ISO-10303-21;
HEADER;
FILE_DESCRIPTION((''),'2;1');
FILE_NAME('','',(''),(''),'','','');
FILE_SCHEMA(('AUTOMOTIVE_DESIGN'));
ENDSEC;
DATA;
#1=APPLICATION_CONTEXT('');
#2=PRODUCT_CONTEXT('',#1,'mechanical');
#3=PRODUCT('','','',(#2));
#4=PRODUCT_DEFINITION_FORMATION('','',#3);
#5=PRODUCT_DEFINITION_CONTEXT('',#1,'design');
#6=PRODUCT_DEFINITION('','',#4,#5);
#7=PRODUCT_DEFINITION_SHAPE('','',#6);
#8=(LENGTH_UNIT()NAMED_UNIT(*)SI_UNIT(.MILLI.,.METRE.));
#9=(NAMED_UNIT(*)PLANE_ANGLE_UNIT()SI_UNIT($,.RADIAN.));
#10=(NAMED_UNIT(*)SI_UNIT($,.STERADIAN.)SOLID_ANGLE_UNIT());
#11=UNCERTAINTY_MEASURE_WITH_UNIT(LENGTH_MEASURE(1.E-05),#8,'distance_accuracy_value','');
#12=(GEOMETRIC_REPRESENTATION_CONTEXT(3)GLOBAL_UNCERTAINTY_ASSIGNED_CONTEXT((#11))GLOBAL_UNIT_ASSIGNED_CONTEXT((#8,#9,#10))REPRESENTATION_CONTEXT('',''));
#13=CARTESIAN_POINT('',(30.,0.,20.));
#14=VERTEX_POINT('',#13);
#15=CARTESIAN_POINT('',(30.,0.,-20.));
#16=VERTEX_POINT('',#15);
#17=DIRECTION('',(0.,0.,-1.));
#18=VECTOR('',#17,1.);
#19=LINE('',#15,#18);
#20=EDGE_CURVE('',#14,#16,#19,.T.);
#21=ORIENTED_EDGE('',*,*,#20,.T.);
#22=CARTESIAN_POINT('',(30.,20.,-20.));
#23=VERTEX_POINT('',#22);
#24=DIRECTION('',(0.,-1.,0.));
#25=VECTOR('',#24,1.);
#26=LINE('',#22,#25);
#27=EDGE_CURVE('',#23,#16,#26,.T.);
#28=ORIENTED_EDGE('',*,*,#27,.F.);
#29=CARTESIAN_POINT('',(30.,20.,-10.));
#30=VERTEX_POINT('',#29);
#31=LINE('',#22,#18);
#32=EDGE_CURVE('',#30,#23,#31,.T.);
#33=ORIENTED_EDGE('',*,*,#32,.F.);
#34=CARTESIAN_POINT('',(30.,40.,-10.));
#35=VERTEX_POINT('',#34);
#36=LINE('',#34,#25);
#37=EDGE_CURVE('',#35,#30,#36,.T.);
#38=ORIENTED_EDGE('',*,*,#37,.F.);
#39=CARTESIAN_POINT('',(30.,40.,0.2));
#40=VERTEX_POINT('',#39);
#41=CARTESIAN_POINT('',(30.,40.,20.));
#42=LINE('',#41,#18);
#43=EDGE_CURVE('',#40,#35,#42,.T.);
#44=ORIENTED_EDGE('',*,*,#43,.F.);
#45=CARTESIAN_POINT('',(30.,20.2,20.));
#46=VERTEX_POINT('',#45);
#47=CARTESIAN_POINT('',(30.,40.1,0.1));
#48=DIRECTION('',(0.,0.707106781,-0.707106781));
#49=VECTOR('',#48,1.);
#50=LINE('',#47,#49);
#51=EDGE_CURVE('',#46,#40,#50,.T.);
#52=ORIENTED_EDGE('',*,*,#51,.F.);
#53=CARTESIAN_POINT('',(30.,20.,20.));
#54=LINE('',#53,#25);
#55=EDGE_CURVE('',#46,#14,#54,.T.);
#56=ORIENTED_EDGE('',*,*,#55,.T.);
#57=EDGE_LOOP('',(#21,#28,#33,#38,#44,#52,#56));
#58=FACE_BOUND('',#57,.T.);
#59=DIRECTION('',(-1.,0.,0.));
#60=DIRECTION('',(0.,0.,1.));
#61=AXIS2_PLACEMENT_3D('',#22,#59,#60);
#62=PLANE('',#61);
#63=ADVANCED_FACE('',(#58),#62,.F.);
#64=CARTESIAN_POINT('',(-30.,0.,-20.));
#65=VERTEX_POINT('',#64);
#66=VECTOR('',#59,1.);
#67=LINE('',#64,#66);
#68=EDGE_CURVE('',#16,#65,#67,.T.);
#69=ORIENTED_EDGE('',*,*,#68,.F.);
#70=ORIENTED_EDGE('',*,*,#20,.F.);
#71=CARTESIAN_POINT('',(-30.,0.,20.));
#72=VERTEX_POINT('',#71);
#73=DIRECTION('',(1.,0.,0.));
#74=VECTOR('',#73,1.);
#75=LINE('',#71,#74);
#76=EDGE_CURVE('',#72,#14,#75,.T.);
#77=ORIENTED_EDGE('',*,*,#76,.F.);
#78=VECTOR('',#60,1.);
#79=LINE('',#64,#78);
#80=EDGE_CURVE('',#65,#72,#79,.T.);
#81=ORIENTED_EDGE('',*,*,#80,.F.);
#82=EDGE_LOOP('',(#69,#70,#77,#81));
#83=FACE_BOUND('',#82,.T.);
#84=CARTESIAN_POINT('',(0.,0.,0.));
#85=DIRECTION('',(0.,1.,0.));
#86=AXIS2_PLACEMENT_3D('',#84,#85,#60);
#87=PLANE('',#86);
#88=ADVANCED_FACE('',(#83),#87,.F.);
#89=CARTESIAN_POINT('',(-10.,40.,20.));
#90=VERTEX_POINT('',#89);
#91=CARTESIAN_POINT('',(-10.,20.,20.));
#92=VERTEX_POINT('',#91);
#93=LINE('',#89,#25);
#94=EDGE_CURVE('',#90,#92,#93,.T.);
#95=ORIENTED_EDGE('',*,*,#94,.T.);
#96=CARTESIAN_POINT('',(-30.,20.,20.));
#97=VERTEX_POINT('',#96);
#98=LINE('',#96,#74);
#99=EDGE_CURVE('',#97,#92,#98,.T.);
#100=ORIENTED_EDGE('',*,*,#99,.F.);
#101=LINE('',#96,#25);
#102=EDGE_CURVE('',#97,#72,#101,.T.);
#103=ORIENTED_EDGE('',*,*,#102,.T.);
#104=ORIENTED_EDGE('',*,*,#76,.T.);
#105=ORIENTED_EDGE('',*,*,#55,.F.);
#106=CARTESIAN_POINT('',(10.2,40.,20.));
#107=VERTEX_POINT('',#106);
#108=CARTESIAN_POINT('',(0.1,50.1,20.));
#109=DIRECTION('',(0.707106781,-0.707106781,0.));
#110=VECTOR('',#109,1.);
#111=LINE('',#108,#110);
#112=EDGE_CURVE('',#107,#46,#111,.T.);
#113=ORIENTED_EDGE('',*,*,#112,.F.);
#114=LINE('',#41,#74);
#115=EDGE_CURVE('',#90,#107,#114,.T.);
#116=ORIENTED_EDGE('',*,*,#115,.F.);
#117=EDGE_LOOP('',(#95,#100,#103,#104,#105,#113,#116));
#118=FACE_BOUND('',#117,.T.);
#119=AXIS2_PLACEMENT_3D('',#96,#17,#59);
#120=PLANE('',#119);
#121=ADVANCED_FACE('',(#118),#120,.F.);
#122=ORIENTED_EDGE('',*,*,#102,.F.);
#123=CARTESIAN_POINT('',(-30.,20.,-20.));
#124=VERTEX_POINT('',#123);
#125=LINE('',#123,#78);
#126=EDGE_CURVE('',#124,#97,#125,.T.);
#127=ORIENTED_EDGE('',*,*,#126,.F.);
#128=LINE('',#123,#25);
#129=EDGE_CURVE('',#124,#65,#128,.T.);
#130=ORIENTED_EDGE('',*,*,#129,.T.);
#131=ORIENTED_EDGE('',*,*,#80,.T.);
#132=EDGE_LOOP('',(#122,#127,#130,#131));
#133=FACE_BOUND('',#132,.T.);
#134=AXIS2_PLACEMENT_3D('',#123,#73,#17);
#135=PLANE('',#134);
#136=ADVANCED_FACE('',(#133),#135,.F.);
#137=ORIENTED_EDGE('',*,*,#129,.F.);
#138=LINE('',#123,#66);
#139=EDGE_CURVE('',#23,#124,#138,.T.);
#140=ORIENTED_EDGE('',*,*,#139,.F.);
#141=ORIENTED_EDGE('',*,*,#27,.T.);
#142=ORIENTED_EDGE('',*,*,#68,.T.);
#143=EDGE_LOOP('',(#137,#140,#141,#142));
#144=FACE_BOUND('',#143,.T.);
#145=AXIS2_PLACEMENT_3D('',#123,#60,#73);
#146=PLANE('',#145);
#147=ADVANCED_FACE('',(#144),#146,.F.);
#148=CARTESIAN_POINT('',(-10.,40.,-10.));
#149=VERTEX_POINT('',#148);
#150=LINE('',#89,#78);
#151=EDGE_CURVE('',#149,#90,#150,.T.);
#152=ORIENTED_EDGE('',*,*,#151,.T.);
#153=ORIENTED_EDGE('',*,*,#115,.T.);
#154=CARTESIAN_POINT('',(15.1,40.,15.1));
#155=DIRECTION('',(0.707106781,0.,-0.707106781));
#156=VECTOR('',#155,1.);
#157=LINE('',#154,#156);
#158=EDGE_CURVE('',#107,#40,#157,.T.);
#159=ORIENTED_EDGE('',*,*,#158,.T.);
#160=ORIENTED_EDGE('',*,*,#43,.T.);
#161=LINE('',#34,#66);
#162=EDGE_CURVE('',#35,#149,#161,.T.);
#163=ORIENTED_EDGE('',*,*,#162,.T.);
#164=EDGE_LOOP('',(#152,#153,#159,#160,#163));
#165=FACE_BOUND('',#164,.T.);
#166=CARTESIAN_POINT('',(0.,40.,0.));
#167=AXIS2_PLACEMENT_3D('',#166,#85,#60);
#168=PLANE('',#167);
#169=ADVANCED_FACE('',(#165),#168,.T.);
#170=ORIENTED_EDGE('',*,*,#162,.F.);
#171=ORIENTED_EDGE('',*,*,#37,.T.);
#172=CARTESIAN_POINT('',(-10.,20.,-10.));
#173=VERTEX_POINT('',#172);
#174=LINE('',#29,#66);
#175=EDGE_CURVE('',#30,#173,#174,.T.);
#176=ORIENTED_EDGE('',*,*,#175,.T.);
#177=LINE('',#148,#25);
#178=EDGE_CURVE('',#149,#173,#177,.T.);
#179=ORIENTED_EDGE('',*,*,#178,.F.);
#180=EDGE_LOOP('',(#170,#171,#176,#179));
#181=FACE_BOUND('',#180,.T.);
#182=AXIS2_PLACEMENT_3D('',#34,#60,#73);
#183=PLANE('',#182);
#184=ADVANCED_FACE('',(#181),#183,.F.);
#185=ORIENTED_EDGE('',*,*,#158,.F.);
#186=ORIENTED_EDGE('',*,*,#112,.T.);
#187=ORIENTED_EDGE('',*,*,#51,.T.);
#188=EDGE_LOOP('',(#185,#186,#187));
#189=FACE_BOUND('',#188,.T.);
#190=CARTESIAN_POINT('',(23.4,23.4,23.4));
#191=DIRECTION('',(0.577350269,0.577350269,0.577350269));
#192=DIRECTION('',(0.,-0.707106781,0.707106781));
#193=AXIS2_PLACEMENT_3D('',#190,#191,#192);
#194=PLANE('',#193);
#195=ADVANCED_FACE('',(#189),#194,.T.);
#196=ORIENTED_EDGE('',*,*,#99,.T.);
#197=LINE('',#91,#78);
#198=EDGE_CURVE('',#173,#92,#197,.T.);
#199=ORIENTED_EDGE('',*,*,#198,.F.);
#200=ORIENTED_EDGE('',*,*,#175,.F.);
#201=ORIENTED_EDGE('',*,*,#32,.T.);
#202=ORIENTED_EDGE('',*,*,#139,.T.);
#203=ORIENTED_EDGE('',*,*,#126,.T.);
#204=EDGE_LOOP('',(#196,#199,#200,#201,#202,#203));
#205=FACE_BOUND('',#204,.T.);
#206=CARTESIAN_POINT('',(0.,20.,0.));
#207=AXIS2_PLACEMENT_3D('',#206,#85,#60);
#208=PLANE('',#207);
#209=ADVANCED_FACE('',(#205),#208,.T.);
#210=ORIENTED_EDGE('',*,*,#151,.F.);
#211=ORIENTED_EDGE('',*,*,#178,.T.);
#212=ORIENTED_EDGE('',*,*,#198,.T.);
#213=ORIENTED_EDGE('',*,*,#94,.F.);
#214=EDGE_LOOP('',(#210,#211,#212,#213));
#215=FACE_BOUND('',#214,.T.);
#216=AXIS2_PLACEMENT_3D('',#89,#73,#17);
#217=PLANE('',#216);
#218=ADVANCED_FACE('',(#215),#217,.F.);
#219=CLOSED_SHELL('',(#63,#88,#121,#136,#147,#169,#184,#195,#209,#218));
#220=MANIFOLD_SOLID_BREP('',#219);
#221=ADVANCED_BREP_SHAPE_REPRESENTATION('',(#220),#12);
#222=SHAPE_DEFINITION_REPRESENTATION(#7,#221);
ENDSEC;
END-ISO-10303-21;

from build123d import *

# Parameters (mm, degrees)
CROQUIS1_W              = 60
CROQUIS1_H              = 40
SALIENTE_EXTRUIR2_DEPTH = 20
CROQUIS3_W              = 40
CROQUIS3_H              = 30
SALIENTE_EXTRUIR3_DEPTH = 20
CHAFL_N1_START          = 40.529988897
CHAFL_N1_OUTLINE_W      = 28
CHAFL_N1_OUTLINE_H      = 31
CHAFL_N1_DEPTH          = 12.470011103


with BuildPart() as part:
    # Croquis1 → Saliente-Extruir2 (new body)
    with BuildSketch(Plane(origin=(0, 0, 0), x_dir=(1, 0, 0), z_dir=(0, 1, 0))):
        Rectangle(CROQUIS1_W, CROQUIS1_H)
    extrude(amount=SALIENTE_EXTRUIR2_DEPTH)

    # Croquis3 → Saliente-Extruir3 (add)
    with BuildSketch(Plane(origin=(0, 20, 0), x_dir=(1, 0, 0), z_dir=(0, 1, 0))):
        with Locations((10, -5)):
            Rectangle(CROQUIS3_W, CROQUIS3_H)
    extrude(amount=SALIENTE_EXTRUIR3_DEPTH)

    # Chaflán1: read off the stored shape, not the designer's step
    # Chaflán1 outline → Chaflán1 (cut)
    with BuildSketch(Plane(origin=(0, 0, 0), x_dir=(0.8164965809277258, -0.40824829046386313, -0.40824829046386313), z_dir=(0.5773502691896258, 0.5773502691896258, 0.5773502691896258)).offset(CHAFL_N1_START)):
        with Locations((-4, 14.5)):
            Rectangle(CHAFL_N1_OUTLINE_W, CHAFL_N1_OUTLINE_H)
    extrude(amount=CHAFL_N1_DEPTH, mode=Mode.SUBTRACT)


solid = part.part
